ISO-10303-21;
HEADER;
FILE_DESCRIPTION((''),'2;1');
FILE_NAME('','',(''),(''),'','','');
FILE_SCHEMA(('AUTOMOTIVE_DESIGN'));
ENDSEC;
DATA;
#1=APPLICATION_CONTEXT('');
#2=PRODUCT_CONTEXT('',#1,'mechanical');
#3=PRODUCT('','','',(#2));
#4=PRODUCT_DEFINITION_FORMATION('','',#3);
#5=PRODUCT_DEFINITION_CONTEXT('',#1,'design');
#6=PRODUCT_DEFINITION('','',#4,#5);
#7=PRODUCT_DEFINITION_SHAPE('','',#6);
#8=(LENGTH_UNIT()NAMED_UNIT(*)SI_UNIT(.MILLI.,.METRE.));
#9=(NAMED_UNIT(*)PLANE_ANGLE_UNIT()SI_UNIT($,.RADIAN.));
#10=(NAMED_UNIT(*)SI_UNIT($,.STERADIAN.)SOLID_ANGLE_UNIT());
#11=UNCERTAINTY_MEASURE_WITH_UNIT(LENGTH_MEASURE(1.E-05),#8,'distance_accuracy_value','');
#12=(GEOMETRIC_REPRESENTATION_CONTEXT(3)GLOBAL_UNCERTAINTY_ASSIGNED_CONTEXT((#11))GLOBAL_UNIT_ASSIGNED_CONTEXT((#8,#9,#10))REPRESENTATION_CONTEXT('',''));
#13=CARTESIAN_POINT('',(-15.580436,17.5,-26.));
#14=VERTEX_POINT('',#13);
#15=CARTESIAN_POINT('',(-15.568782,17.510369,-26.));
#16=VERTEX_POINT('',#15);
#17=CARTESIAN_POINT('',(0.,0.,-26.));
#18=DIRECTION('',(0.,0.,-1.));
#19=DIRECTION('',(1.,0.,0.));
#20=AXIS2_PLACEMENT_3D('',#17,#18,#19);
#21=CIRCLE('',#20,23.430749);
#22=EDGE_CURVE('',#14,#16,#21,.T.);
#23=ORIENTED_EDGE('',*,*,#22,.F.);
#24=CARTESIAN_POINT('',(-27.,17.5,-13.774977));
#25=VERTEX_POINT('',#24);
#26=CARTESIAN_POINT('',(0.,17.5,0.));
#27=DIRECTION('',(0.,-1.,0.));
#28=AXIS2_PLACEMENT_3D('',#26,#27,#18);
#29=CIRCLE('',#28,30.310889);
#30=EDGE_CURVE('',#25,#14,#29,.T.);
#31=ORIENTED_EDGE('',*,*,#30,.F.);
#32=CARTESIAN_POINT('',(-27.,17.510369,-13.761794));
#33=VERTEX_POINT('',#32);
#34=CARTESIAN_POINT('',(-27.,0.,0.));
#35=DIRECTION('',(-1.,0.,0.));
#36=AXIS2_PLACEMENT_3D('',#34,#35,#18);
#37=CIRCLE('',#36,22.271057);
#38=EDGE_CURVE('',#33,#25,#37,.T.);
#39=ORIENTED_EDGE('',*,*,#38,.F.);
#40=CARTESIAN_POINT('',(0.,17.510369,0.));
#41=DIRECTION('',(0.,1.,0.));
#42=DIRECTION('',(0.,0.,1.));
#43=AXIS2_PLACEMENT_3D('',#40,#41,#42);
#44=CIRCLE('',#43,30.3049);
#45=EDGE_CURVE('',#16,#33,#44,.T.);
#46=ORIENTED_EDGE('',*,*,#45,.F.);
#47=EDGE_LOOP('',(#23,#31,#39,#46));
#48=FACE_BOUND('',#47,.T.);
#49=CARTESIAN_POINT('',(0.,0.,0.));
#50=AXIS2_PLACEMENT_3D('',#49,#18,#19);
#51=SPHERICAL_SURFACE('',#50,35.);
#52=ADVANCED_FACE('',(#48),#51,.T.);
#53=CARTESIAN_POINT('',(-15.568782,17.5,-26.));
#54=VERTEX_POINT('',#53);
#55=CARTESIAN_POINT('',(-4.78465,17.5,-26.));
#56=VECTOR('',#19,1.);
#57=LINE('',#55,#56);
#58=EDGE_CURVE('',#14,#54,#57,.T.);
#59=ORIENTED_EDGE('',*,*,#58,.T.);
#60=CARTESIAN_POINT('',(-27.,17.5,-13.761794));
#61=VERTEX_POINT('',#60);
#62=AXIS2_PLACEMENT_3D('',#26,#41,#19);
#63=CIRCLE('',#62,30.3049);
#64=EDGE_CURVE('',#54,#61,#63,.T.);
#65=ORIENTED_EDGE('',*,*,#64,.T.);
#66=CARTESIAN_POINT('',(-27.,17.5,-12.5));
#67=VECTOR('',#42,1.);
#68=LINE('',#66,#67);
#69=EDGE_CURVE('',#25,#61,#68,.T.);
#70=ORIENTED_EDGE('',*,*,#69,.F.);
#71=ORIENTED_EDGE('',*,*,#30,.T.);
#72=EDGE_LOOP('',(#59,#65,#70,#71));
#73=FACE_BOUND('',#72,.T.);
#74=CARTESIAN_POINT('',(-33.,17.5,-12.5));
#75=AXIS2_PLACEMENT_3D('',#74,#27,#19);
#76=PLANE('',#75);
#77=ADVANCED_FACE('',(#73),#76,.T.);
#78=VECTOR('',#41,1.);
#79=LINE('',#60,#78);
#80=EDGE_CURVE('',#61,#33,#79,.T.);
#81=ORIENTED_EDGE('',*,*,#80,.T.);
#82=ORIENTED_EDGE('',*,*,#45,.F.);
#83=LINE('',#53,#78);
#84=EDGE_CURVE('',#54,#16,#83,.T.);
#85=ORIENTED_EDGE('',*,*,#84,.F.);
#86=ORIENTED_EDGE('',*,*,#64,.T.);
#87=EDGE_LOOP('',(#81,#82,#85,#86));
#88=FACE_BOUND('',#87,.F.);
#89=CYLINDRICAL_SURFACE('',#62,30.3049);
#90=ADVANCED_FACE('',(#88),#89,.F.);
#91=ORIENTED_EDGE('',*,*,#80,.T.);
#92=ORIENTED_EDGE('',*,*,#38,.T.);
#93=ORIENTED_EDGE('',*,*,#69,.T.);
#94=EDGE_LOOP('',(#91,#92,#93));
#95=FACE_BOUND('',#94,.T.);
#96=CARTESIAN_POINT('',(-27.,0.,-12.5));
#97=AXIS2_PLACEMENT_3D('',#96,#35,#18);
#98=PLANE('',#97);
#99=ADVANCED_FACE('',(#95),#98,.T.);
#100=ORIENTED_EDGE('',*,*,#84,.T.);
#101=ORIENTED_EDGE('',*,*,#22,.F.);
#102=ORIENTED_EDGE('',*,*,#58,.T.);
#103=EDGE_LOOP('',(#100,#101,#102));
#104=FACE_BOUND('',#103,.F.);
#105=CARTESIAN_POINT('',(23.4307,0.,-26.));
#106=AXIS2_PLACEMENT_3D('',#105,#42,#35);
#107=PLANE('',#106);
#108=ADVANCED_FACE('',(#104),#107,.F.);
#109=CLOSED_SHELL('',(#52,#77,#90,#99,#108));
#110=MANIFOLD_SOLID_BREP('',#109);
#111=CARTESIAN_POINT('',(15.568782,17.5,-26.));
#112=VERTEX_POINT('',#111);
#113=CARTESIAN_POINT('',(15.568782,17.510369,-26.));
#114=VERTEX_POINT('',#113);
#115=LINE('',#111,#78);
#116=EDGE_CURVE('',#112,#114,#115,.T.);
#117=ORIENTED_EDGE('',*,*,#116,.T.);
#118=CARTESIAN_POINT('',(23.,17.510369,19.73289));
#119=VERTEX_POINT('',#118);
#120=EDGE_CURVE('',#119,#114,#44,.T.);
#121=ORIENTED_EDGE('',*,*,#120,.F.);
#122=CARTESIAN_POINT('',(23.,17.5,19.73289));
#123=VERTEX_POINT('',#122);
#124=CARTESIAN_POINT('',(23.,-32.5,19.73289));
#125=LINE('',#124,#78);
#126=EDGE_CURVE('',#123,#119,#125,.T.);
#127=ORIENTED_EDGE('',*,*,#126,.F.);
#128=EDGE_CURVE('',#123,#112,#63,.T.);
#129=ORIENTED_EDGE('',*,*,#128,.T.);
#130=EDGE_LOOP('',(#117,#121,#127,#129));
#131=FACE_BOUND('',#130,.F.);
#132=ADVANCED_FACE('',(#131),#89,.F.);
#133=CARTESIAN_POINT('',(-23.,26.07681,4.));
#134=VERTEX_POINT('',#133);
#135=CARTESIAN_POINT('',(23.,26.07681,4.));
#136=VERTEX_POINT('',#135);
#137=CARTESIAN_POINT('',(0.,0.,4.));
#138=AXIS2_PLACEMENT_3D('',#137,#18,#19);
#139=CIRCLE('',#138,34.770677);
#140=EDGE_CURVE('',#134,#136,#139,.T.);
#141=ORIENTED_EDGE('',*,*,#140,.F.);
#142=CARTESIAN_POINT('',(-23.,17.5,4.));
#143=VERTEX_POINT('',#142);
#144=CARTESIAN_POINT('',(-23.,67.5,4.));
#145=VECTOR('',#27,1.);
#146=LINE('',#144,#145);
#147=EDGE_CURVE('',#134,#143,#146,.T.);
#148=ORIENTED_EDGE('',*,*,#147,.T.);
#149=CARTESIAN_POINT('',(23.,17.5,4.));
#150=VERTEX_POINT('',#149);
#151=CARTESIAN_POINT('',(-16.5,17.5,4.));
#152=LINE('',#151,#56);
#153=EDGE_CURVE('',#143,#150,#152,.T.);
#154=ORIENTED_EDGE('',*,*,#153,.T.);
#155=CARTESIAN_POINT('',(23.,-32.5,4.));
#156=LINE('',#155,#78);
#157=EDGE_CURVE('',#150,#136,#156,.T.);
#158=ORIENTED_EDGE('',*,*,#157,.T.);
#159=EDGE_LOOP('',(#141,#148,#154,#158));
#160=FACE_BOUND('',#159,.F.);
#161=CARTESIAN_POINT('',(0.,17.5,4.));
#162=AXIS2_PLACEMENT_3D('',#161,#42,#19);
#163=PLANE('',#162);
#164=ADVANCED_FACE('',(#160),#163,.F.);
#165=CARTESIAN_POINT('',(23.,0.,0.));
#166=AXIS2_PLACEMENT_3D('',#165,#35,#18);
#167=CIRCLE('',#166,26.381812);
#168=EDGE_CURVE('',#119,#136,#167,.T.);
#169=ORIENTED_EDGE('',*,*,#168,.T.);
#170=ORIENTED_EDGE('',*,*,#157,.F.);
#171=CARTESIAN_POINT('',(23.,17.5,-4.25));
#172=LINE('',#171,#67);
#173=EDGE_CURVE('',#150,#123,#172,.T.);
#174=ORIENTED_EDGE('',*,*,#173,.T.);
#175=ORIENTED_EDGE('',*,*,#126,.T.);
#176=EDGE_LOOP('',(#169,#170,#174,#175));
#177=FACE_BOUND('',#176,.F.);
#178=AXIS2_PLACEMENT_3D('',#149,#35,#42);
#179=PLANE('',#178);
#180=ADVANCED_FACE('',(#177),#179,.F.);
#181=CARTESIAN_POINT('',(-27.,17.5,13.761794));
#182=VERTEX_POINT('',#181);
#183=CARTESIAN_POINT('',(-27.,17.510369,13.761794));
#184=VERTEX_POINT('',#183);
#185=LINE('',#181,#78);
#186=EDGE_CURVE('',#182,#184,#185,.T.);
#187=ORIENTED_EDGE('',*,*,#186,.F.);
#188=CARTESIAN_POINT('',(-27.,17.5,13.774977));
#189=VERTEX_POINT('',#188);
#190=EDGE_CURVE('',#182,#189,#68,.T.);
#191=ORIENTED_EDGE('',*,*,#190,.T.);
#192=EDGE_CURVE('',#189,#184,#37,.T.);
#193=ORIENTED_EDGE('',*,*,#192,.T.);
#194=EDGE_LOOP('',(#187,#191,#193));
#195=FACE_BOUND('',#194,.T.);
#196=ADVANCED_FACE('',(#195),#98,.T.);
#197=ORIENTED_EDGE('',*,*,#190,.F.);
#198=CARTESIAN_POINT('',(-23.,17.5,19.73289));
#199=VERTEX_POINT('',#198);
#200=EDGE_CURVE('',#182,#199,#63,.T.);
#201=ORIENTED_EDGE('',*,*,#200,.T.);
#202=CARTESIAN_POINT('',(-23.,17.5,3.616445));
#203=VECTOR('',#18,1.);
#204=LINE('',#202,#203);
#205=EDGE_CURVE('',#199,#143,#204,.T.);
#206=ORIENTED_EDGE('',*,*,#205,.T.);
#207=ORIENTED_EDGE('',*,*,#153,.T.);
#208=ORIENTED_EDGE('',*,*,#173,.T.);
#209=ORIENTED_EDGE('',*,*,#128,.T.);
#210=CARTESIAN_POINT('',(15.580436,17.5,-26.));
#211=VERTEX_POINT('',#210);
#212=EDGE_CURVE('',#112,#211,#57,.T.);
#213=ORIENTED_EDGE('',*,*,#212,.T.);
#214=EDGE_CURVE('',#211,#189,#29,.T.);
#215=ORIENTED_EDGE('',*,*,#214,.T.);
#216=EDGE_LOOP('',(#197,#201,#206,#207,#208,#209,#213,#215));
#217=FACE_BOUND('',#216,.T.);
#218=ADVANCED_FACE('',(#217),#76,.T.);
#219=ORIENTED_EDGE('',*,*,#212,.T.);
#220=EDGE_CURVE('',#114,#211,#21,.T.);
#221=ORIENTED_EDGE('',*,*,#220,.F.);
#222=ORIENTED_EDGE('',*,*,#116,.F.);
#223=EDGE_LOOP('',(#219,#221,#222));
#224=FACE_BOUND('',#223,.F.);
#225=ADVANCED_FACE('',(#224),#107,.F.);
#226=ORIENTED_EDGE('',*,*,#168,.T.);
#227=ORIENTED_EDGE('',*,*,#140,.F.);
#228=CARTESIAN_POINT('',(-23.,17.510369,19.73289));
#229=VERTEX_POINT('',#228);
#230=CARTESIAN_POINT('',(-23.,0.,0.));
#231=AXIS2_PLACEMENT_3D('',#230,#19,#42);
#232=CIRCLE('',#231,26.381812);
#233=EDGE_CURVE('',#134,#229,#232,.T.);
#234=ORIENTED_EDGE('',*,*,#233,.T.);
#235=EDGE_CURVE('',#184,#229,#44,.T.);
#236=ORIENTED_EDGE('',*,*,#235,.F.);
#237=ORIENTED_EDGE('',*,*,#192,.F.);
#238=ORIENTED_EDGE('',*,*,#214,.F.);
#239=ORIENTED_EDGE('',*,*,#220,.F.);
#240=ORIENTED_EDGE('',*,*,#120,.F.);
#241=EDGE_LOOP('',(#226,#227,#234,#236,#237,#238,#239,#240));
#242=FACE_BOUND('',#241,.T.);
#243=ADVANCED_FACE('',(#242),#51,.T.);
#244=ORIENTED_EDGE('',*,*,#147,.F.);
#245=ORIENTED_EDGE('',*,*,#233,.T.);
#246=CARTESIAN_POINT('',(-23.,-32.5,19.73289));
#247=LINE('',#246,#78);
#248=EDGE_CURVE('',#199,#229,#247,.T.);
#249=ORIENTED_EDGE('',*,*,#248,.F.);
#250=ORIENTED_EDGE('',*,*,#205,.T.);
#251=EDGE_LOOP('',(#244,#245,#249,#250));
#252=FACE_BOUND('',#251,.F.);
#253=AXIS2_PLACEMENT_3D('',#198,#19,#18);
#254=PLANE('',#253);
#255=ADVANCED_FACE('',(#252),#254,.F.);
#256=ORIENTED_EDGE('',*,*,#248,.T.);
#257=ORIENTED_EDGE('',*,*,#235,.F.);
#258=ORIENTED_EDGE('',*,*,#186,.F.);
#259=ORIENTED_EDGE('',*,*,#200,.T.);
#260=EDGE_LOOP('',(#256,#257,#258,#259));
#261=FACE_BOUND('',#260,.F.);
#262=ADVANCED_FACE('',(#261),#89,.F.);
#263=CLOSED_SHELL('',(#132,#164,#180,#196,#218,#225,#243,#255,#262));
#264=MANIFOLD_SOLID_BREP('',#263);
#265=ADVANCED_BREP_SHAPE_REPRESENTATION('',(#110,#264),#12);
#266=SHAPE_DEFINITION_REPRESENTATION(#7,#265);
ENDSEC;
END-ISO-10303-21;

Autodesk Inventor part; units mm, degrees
ref_plane "YZ Plane" through (0, 0, 0) normal (1, 0, 0) x (0, 1, 0)
ref_plane "XZ Plane" through (0, 0, 0) normal (0, 1, 0) x (-1, 0, 0)
ref_plane "XY Plane" through (0, 0, 0) normal (0, 0, 1) x (1, 0, 0)
sketch "スケッチ1" plane through (0, 0, 0) normal (0, 1, 0) x (-1, 0, 0)
  circle A0 centre (0, 0) radius 35
  line L0 (0, 0) -> (0, -35)
  line L1 (0, 0) -> (0, 35)
  dimension "d0" = 70
revolve "回転1" add sketch "スケッチ1" angle 180 about axis through (0, 0, 0) along (0, 0, 1) picked at (-2.5961, -23.0408) contours L1 L0 A0
sketch "スケッチ5" plane through (0, 0, 0) normal (0, -1, 0) x (1, 0, 0)
  line L0 (-20, -23) -> (20, -23)
  line L1 (20, -23) -> (20, -14)
  line L2 (20, -14) -> (-20, -14)
  line L3 (-20, -14) -> (-20, -23)
  line L4 (-20, -14) -> (-23, -14)
  line L5 (-23, -14) -> (-23, -16)
  line L6 (-23, -16) -> (-20, -16)
  line L7 (-20, -16) -> (-20, -14)
  line L8 (0, 26) -> (-17, 26)
  line L9 (-17, 26) -> (-17, 24)
  line L10 (-17, 24) -> (0, 24)
  line L11 (0, 24) -> (0, 26)
  line L12 (0, 20) -> (-20, 20)
  line L13 (-20, 20) -> (-20, 19)
  line L14 (-20, 19) -> (0, 19)
  line L15 (0, 19) -> (0, 20)
  line L16 (0, 12) -> (-19, 12)
  line L17 (-19, 12) -> (-19, 10)
  line L18 (-19, 10) -> (0, 10)
  line L19 (0, 10) -> (0, 12)
  line L20 (0, 2.5) -> (-23, 2.5)
  line L21 (-23, 2.5) -> (-23, 1.5)
  line L22 (-23, 1.5) -> (0, 1.5)
  line L23 (0, 1.5) -> (0, 2.5)
  circle A0 centre (0, 0) radius 35 projected
  circle A1 centre (0, 0) radius 35 projected
  line L24 (0, 35) -> (0, -35)
  line L25 (35, 0) -> (-35, 0)
  line L26 (-32, -0.5) -> (-23, -0.5)
  line L27 (-23, -0.5) -> (-23, -10.5)
  line L28 (-23, -10.5) -> (-32, -10.5)
  line L29 (-32, -10.5) -> (-32, -0.5)
  line L30 (-23, -8.0262) -> (-23, -0.5)
  line L31 (-27, 22.2711) -> (-27, -22.2711)
  line L32 (-15.5, 26) -> (0, 26)
  line L33 (0, 26) -> (0, 35)
  line L34 (0, 35) -> (-15.5, 35)
  line L35 (-15.5, 35) -> (-15.5, 26)
  line L36 (-15.5, 24) -> (0, 24)
  line L37 (0, 24) -> (0, 21)
  line L38 (0, 21) -> (-15.5, 21)
  line L39 (-15.5, 21) -> (-15.5, 24)
  line L40 (-16, 12) -> (0, 12)
  line L41 (0, 12) -> (0, 18)
  line L42 (0, 18) -> (-16, 18)
  line L43 (-16, 18) -> (-16, 12)
  line L44 (-16, 10) -> (0, 10)
  line L45 (0, 10) -> (0, 4)
  line L46 (0, 4) -> (-16, 4)
  line L47 (-16, 4) -> (-16, 10)
  line L48 (-23, -5.5) -> (-39.6865, -5.5)
  line L49 (-23, -5.5) -> (-7.8337, -5.5)
  line L50 (-8, 0.5) -> (-23, 0.5)
  line L51 (-23, 0.5) -> (-23, -11.5)
  line L52 (-23, -11.5) -> (-8, -11.5)
  line L53 (-8, -11.5) -> (-8, 0.5)
  line L54 (-8, 0.5) -> (-23, -11.5) construction
  line L55 (-23, 0.5) -> (-8, -11.5) construction
  line L56 (-23, 1.5) -> (-33, 1.5)
  line L57 (-33, 1.5) -> (-33, -12.5)
  line L58 (-33, -12.5) -> (-23, -12.5)
  line L59 (-23, -12.5) -> (-23, 1.5)
  line L60 (-23, 1.5) -> (-33, -12.5) construction
  line L61 (-33, 1.5) -> (-23, -12.5) construction
  line L62 (-8, 0.5) -> (-1, 0.5)
  line L63 (-1, 0.5) -> (-1, -11.5)
  line L64 (-1, -11.5) -> (-8, -11.5)
  line L65 (-8, -11.5) -> (-8, 0.5)
  line L66 (-8, 0.5) -> (-1, -11.5) construction
  line L67 (-1, 0.5) -> (-8, -11.5) construction
  line L68 (-23, -0.5) -> (-27, -0.5)
  line L69 (-23, -10.5) -> (-27, -10.5)
  line L70 (-23, 1.5) -> (-27, 1.5)
  line L71 (-23, -12.5) -> (-27, -12.5)
  line L72 (23.4307, -26) -> (-23.4307, -26)
  line L73 (-8, 0.5) -> (-6.8, 0.5)
  line L74 (-6.8, 0.5) -> (-6.8, -11.5)
  line L75 (-6.8, -11.5) -> (-8, -11.5)
  line L76 (-8, -11.5) -> (-8, 0.5)
  line L77 (-2, 4) -> (1, 4)
  line L78 (0, 21) -> (-4, 21)
  line L79 (-4, 21) -> (-4, 18)
  line L80 (-4, 18) -> (0, 18)
  line L81 (0, 18) -> (0, 21)
  line L82 (-6, 4) -> (-1, 4)
  line L83 (-1, 4) -> (-1, 0.5)
  line L84 (-1, 0.5) -> (-6, 0.5)
  line L85 (-6, 0.5) -> (-6, 4)
  point P0 (0, -23)
  point P1 (0, -14)
  point P2 (-20, -16)
  point P3 (0, 25)
  point P4 (0, 19.5)
  point P5 (0, 11)
  point P6 (0, 2)
  point P7 (-20, -18.5)
  point P8 (-27, -0.5262)
  point P9 (-27, -10.5)
  point P10 (-15.5, 22.5)
  point P11 (-15.5, 31.3807)
  point P12 (0, 26)
  point P13 (0, 24)
  point P14 (0, 10)
  point P15 (0, 12)
  point P16 (-27, 0)
  point P17 (-29, 0)
  point P18 (-20, 0)
  point P19 (-15.5, -5.5)
  point P20 (-28, -5.5)
  point P21 (-4.5, -5.5)
  point P22 (-8, -11.5)
  point P23 (-8, 0.5)
  point P24 (-27, 0.5)
  point P25 (-28, 0.4738)
  point P26 (-28, -11.5262)
  point P27 (-27, -11.5)
  point P28 (-23, -10.5)
  point P29 (-23, -0.5)
  point P30 (-23, -0.5)
  point P31 (-23, -10.5)
  point P32 (-23, 0.5)
  point P33 (-23, -11.5)
  point P34 (-8, 0)
  point P35 (-1, 0)
  point P36 (-8, -11.5)
  point P37 (-4, 19)
  point P38 (0, 19)
  point P39 (-4, 20)
  point P40 (0, 20)
  point P41 (-1, 0.5)
  point P42 (-1, 4)
  dimension "d12" = 40
  dimension "d13" = 9
  dimension "d21" = 3
  dimension "d22" = 2
  dimension "d23" = 17
  dimension "d24" = 2
  dimension "d27" = 20
  dimension "d28" = 1
  dimension "d30" = 19
  dimension "d31" = 2
  dimension "d33" = 1
  dimension "d88" = 0
  dimension "d89" = 0
  dimension "d90" = 12
  dimension "d92" = 20
  dimension "d93" = 9
  dimension "d94" = 15
  dimension "d95" = 23
  dimension "d97" = 9
  dimension "d98" = 10
  dimension "d113" = 27
  dimension "d122" = 15.5
  dimension "d123" = 35
  dimension "d124" = 3
  dimension "d125" = 15.5
  dimension "d126" = 6
  dimension "d127" = 6
  dimension "d128" = 16
  dimension "d129" = 16
  dimension "d147" = 12
  dimension "d149" = 8
  dimension "d151" = 15
  dimension "d161" = 14
  dimension "d162" = 10
  dimension "d164" = 12
  dimension "d165" = 7
  dimension "d170" = 26
  dimension "d175" = 1.2
  dimension "d195" = 4
  dimension "d201" = 5
extrude "GNSボード" cut sketch "スケッチ5" against normal blind 16 contours L11 L10 L9 L8
extrude "GNSボード止めるよう" cut sketch "スケッチ5" against normal blind 15 contours L24 L8 L35 A0 | L24 L38 L39 L10
extrude "アルミ板１" cut sketch "スケッチ5" against normal blind 17.5 contours L15 L14 L79 L12 | L79 L14 L13 L12
extrude "メイン基板" cut sketch "スケッチ5" against normal blind 17.5 contours L18 L17 L16 L19
extrude "メイン止めるよう" cut sketch "スケッチ5" against normal blind 16.5 contours L46 L47 L18 L24 | L16 L43 L42 L24
extrude "アルミ板２" cut sketch "スケッチ5" against normal blind 17.5 contours L22 L83 L20 L23 | L22 L85 L20 L83 | L22 L21 L20 L85
extrude "電池ボックス入れ" cut sketch "スケッチ5" against normal blind 15 contours L3 L2 L24 L0 | L24 L2 L1 L0 | L6 L5 L4 L3
extrude "side ut" cut sketch "スケッチ5" against normal blind 100 contours A0 L58 L31 | A0 L57 L48 L29 L28 L31 L58 | A0 L48 L57 | L28 L29 L48 L31 | L31 L56 L57 L25 A0 | A0 L25 L57 L48 | L57 L25 L31 L26 L29 L48 | L48 L29 L26 L31 | L31 L25 L57 L56
extrude "motor case" add sketch "スケッチ5" against normal blind 7 contours L58 L57 A0 | A0 L57 L48 L29 L28 L31 L58 | L31 L28 L51 L59 L58 | L53 L49 L27 L51 L25 | L25 L51 L50 L53 | L31 L48 L27 L28 | L28 L29 L48 L31 | L59 L51 L25 L31 L56 | L51 L26 L31 L25 | L53 L52 L51 L27 L49 | L57 L25 L31 L26 L29 L48 | L48 L29 L26 L31 | L31 L26 L27 L48 | L31 L25 L57 L56
extrude "bottom cut" cut sketch "スケッチ5" against normal blind 90 contours L72 A0 L24 | L24 A0 L72
extrude "motor" cut sketch "スケッチ5" against normal blind 6 contours L63 L64 L74 L25 | L25 L74 L62 L63 | L74 L64 L53 L25 | L25 L53 L62 L74 | L53 L49 L27 L51 L25 | L25 L51 L50 L53 | L31 L48 L27 L28 | L28 L29 L48 L31 | L53 L52 L51 L27 L49 | L48 L29 L26 L31 | L31 L26 L27 L48
extrude "motor block" add sketch "スケッチ5" against normal blind 10 contours L74 L64 L53 L25 | L25 L53 L62 L74
extrude "押し出し35" cut sketch "スケッチ5" against normal blind 5 contours L24 L12 L79 L38 | L42 L79 L14 L24
mirror "ミラー12" about plane through (0, 0, 0) normal (1, 0, 0) of "押し出し35"
sketch "スケッチ27" plane through (-33, 0, -12.5) normal (-1, 0, 0) x (0, 0, 1)
  line L0 (14, 0) -> (0, 0) projected
  circle A0 centre (7, 0) radius 3
  point P0 (12.5, 0)
  dimension "d198" = 6
extrude "押し出し36" cut sketch "スケッチ27" against normal blind 27
extrude "押し出し37" cut sketch "スケッチ5" against normal blind 15 contours L83 L62 L85 L22 | L22 L85 L20 L83 | L20 L85 L46 L83
ref_plane "作業平面4" through (-33, 17.5, -12.5) normal (0, -1, 0) x (1, 0, 0)
sketch "スケッチ28" plane through (-33, 17.5, -12.5) normal (0, -1, 0) x (1, 0, 0)
  line L0 (33, 24.5) -> (17, 24.5) projected
  line L1 (33, 30.5) -> (33, 24.5) projected
  line L2 (17, 30.5) -> (33, 30.5) projected
  line L3 (17, 24.5) -> (17, 30.5) projected
  line L4 (33, 16.5) -> (17, 16.5) projected
  line L5 (33, 22.5) -> (33, 16.5) projected
  line L6 (17, 22.5) -> (33, 22.5) projected
  line L7 (17, 16.5) -> (17, 22.5) projected
  line L8 (33, 24.5) -> (14, 24.5) projected
  line L9 (14, 22.5) -> (33, 22.5) projected
  line L10 (13, 31.5) -> (33, 31.5) projected
  line L11 (13, 32.5) -> (29, 32.5) projected
  line L12 (16, 36.5) -> (33, 36.5) projected
  line L13 (33, 38.5) -> (16, 38.5) projected
  arc A0 (33, 44.1228) -> (17.5, 40.0636) centre (33, 12.5) ccw projected
  line L14 (17.5, 38.5) -> (17.5, 40.0636) projected
  line L15 (33, 38.5) -> (17.5, 38.5) projected
  line L16 (33, 44.1228) -> (33, 38.5) projected
  line L17 (29, 33.5) -> (17.5, 33.5) projected
  line L18 (33, 33.5) -> (17.5, 33.5) projected
  line L19 (33, 36.5) -> (33, 33.5) projected
  line L20 (17.5, 36.5) -> (33, 36.5) projected
  line L21 (17.5, 33.5) -> (17.5, 36.5) projected
  line L22 (33, 36.5) -> (16, 36.5) projected
  line L23 (33, 38.5) -> (33, 36.5) projected
  line L24 (16, 38.5) -> (33, 38.5) projected
  line L25 (16, 36.5) -> (16, 38.5) projected
  line L26 (33, 22.5) -> (14, 22.5) projected
  line L27 (33, 24.5) -> (33, 22.5) projected
  line L28 (14, 24.5) -> (33, 24.5) projected
  line L29 (14, 22.5) -> (14, 24.5) projected
  line L30 (10, 16.5) -> (56, 16.5)
  line L31 (56, 16.5) -> (56, 46.6228)
  line L32 (56, 46.6228) -> (10, 46.6228)
  line L33 (10, 46.6228) -> (10, 16.5)
  circle A1 centre (33, 12.5) radius 30.3049
  point P0 (10, 32.2329)
  point P1 (56, 32.2329)
  dimension "d205" = 46
  dimension "d206" = 0
  dimension "d207" = 23
  dimension "d208" = 30.1228
extrude "押し出し38" cut sketch "スケッチ28" along normal mid plane 100 contours L30 L31 A1 L33 L4
sketch "スケッチ29" plane through (-33, 17.5, -12.5) normal (0, -1, 0) x (1, 0, 0)
  circle A0 centre (33, 12.5) radius 41.7955
extrude "押し出し39" cut sketch "スケッチ29" along normal blind 100
sketch "スケッチ30" plane through (-33, 17.5, -12.5) normal (0, -1, 0) x (1, 0, 0)
  point P0 (33, 12.5)
properties part number "body back for main" material "ABS プラスチック"
